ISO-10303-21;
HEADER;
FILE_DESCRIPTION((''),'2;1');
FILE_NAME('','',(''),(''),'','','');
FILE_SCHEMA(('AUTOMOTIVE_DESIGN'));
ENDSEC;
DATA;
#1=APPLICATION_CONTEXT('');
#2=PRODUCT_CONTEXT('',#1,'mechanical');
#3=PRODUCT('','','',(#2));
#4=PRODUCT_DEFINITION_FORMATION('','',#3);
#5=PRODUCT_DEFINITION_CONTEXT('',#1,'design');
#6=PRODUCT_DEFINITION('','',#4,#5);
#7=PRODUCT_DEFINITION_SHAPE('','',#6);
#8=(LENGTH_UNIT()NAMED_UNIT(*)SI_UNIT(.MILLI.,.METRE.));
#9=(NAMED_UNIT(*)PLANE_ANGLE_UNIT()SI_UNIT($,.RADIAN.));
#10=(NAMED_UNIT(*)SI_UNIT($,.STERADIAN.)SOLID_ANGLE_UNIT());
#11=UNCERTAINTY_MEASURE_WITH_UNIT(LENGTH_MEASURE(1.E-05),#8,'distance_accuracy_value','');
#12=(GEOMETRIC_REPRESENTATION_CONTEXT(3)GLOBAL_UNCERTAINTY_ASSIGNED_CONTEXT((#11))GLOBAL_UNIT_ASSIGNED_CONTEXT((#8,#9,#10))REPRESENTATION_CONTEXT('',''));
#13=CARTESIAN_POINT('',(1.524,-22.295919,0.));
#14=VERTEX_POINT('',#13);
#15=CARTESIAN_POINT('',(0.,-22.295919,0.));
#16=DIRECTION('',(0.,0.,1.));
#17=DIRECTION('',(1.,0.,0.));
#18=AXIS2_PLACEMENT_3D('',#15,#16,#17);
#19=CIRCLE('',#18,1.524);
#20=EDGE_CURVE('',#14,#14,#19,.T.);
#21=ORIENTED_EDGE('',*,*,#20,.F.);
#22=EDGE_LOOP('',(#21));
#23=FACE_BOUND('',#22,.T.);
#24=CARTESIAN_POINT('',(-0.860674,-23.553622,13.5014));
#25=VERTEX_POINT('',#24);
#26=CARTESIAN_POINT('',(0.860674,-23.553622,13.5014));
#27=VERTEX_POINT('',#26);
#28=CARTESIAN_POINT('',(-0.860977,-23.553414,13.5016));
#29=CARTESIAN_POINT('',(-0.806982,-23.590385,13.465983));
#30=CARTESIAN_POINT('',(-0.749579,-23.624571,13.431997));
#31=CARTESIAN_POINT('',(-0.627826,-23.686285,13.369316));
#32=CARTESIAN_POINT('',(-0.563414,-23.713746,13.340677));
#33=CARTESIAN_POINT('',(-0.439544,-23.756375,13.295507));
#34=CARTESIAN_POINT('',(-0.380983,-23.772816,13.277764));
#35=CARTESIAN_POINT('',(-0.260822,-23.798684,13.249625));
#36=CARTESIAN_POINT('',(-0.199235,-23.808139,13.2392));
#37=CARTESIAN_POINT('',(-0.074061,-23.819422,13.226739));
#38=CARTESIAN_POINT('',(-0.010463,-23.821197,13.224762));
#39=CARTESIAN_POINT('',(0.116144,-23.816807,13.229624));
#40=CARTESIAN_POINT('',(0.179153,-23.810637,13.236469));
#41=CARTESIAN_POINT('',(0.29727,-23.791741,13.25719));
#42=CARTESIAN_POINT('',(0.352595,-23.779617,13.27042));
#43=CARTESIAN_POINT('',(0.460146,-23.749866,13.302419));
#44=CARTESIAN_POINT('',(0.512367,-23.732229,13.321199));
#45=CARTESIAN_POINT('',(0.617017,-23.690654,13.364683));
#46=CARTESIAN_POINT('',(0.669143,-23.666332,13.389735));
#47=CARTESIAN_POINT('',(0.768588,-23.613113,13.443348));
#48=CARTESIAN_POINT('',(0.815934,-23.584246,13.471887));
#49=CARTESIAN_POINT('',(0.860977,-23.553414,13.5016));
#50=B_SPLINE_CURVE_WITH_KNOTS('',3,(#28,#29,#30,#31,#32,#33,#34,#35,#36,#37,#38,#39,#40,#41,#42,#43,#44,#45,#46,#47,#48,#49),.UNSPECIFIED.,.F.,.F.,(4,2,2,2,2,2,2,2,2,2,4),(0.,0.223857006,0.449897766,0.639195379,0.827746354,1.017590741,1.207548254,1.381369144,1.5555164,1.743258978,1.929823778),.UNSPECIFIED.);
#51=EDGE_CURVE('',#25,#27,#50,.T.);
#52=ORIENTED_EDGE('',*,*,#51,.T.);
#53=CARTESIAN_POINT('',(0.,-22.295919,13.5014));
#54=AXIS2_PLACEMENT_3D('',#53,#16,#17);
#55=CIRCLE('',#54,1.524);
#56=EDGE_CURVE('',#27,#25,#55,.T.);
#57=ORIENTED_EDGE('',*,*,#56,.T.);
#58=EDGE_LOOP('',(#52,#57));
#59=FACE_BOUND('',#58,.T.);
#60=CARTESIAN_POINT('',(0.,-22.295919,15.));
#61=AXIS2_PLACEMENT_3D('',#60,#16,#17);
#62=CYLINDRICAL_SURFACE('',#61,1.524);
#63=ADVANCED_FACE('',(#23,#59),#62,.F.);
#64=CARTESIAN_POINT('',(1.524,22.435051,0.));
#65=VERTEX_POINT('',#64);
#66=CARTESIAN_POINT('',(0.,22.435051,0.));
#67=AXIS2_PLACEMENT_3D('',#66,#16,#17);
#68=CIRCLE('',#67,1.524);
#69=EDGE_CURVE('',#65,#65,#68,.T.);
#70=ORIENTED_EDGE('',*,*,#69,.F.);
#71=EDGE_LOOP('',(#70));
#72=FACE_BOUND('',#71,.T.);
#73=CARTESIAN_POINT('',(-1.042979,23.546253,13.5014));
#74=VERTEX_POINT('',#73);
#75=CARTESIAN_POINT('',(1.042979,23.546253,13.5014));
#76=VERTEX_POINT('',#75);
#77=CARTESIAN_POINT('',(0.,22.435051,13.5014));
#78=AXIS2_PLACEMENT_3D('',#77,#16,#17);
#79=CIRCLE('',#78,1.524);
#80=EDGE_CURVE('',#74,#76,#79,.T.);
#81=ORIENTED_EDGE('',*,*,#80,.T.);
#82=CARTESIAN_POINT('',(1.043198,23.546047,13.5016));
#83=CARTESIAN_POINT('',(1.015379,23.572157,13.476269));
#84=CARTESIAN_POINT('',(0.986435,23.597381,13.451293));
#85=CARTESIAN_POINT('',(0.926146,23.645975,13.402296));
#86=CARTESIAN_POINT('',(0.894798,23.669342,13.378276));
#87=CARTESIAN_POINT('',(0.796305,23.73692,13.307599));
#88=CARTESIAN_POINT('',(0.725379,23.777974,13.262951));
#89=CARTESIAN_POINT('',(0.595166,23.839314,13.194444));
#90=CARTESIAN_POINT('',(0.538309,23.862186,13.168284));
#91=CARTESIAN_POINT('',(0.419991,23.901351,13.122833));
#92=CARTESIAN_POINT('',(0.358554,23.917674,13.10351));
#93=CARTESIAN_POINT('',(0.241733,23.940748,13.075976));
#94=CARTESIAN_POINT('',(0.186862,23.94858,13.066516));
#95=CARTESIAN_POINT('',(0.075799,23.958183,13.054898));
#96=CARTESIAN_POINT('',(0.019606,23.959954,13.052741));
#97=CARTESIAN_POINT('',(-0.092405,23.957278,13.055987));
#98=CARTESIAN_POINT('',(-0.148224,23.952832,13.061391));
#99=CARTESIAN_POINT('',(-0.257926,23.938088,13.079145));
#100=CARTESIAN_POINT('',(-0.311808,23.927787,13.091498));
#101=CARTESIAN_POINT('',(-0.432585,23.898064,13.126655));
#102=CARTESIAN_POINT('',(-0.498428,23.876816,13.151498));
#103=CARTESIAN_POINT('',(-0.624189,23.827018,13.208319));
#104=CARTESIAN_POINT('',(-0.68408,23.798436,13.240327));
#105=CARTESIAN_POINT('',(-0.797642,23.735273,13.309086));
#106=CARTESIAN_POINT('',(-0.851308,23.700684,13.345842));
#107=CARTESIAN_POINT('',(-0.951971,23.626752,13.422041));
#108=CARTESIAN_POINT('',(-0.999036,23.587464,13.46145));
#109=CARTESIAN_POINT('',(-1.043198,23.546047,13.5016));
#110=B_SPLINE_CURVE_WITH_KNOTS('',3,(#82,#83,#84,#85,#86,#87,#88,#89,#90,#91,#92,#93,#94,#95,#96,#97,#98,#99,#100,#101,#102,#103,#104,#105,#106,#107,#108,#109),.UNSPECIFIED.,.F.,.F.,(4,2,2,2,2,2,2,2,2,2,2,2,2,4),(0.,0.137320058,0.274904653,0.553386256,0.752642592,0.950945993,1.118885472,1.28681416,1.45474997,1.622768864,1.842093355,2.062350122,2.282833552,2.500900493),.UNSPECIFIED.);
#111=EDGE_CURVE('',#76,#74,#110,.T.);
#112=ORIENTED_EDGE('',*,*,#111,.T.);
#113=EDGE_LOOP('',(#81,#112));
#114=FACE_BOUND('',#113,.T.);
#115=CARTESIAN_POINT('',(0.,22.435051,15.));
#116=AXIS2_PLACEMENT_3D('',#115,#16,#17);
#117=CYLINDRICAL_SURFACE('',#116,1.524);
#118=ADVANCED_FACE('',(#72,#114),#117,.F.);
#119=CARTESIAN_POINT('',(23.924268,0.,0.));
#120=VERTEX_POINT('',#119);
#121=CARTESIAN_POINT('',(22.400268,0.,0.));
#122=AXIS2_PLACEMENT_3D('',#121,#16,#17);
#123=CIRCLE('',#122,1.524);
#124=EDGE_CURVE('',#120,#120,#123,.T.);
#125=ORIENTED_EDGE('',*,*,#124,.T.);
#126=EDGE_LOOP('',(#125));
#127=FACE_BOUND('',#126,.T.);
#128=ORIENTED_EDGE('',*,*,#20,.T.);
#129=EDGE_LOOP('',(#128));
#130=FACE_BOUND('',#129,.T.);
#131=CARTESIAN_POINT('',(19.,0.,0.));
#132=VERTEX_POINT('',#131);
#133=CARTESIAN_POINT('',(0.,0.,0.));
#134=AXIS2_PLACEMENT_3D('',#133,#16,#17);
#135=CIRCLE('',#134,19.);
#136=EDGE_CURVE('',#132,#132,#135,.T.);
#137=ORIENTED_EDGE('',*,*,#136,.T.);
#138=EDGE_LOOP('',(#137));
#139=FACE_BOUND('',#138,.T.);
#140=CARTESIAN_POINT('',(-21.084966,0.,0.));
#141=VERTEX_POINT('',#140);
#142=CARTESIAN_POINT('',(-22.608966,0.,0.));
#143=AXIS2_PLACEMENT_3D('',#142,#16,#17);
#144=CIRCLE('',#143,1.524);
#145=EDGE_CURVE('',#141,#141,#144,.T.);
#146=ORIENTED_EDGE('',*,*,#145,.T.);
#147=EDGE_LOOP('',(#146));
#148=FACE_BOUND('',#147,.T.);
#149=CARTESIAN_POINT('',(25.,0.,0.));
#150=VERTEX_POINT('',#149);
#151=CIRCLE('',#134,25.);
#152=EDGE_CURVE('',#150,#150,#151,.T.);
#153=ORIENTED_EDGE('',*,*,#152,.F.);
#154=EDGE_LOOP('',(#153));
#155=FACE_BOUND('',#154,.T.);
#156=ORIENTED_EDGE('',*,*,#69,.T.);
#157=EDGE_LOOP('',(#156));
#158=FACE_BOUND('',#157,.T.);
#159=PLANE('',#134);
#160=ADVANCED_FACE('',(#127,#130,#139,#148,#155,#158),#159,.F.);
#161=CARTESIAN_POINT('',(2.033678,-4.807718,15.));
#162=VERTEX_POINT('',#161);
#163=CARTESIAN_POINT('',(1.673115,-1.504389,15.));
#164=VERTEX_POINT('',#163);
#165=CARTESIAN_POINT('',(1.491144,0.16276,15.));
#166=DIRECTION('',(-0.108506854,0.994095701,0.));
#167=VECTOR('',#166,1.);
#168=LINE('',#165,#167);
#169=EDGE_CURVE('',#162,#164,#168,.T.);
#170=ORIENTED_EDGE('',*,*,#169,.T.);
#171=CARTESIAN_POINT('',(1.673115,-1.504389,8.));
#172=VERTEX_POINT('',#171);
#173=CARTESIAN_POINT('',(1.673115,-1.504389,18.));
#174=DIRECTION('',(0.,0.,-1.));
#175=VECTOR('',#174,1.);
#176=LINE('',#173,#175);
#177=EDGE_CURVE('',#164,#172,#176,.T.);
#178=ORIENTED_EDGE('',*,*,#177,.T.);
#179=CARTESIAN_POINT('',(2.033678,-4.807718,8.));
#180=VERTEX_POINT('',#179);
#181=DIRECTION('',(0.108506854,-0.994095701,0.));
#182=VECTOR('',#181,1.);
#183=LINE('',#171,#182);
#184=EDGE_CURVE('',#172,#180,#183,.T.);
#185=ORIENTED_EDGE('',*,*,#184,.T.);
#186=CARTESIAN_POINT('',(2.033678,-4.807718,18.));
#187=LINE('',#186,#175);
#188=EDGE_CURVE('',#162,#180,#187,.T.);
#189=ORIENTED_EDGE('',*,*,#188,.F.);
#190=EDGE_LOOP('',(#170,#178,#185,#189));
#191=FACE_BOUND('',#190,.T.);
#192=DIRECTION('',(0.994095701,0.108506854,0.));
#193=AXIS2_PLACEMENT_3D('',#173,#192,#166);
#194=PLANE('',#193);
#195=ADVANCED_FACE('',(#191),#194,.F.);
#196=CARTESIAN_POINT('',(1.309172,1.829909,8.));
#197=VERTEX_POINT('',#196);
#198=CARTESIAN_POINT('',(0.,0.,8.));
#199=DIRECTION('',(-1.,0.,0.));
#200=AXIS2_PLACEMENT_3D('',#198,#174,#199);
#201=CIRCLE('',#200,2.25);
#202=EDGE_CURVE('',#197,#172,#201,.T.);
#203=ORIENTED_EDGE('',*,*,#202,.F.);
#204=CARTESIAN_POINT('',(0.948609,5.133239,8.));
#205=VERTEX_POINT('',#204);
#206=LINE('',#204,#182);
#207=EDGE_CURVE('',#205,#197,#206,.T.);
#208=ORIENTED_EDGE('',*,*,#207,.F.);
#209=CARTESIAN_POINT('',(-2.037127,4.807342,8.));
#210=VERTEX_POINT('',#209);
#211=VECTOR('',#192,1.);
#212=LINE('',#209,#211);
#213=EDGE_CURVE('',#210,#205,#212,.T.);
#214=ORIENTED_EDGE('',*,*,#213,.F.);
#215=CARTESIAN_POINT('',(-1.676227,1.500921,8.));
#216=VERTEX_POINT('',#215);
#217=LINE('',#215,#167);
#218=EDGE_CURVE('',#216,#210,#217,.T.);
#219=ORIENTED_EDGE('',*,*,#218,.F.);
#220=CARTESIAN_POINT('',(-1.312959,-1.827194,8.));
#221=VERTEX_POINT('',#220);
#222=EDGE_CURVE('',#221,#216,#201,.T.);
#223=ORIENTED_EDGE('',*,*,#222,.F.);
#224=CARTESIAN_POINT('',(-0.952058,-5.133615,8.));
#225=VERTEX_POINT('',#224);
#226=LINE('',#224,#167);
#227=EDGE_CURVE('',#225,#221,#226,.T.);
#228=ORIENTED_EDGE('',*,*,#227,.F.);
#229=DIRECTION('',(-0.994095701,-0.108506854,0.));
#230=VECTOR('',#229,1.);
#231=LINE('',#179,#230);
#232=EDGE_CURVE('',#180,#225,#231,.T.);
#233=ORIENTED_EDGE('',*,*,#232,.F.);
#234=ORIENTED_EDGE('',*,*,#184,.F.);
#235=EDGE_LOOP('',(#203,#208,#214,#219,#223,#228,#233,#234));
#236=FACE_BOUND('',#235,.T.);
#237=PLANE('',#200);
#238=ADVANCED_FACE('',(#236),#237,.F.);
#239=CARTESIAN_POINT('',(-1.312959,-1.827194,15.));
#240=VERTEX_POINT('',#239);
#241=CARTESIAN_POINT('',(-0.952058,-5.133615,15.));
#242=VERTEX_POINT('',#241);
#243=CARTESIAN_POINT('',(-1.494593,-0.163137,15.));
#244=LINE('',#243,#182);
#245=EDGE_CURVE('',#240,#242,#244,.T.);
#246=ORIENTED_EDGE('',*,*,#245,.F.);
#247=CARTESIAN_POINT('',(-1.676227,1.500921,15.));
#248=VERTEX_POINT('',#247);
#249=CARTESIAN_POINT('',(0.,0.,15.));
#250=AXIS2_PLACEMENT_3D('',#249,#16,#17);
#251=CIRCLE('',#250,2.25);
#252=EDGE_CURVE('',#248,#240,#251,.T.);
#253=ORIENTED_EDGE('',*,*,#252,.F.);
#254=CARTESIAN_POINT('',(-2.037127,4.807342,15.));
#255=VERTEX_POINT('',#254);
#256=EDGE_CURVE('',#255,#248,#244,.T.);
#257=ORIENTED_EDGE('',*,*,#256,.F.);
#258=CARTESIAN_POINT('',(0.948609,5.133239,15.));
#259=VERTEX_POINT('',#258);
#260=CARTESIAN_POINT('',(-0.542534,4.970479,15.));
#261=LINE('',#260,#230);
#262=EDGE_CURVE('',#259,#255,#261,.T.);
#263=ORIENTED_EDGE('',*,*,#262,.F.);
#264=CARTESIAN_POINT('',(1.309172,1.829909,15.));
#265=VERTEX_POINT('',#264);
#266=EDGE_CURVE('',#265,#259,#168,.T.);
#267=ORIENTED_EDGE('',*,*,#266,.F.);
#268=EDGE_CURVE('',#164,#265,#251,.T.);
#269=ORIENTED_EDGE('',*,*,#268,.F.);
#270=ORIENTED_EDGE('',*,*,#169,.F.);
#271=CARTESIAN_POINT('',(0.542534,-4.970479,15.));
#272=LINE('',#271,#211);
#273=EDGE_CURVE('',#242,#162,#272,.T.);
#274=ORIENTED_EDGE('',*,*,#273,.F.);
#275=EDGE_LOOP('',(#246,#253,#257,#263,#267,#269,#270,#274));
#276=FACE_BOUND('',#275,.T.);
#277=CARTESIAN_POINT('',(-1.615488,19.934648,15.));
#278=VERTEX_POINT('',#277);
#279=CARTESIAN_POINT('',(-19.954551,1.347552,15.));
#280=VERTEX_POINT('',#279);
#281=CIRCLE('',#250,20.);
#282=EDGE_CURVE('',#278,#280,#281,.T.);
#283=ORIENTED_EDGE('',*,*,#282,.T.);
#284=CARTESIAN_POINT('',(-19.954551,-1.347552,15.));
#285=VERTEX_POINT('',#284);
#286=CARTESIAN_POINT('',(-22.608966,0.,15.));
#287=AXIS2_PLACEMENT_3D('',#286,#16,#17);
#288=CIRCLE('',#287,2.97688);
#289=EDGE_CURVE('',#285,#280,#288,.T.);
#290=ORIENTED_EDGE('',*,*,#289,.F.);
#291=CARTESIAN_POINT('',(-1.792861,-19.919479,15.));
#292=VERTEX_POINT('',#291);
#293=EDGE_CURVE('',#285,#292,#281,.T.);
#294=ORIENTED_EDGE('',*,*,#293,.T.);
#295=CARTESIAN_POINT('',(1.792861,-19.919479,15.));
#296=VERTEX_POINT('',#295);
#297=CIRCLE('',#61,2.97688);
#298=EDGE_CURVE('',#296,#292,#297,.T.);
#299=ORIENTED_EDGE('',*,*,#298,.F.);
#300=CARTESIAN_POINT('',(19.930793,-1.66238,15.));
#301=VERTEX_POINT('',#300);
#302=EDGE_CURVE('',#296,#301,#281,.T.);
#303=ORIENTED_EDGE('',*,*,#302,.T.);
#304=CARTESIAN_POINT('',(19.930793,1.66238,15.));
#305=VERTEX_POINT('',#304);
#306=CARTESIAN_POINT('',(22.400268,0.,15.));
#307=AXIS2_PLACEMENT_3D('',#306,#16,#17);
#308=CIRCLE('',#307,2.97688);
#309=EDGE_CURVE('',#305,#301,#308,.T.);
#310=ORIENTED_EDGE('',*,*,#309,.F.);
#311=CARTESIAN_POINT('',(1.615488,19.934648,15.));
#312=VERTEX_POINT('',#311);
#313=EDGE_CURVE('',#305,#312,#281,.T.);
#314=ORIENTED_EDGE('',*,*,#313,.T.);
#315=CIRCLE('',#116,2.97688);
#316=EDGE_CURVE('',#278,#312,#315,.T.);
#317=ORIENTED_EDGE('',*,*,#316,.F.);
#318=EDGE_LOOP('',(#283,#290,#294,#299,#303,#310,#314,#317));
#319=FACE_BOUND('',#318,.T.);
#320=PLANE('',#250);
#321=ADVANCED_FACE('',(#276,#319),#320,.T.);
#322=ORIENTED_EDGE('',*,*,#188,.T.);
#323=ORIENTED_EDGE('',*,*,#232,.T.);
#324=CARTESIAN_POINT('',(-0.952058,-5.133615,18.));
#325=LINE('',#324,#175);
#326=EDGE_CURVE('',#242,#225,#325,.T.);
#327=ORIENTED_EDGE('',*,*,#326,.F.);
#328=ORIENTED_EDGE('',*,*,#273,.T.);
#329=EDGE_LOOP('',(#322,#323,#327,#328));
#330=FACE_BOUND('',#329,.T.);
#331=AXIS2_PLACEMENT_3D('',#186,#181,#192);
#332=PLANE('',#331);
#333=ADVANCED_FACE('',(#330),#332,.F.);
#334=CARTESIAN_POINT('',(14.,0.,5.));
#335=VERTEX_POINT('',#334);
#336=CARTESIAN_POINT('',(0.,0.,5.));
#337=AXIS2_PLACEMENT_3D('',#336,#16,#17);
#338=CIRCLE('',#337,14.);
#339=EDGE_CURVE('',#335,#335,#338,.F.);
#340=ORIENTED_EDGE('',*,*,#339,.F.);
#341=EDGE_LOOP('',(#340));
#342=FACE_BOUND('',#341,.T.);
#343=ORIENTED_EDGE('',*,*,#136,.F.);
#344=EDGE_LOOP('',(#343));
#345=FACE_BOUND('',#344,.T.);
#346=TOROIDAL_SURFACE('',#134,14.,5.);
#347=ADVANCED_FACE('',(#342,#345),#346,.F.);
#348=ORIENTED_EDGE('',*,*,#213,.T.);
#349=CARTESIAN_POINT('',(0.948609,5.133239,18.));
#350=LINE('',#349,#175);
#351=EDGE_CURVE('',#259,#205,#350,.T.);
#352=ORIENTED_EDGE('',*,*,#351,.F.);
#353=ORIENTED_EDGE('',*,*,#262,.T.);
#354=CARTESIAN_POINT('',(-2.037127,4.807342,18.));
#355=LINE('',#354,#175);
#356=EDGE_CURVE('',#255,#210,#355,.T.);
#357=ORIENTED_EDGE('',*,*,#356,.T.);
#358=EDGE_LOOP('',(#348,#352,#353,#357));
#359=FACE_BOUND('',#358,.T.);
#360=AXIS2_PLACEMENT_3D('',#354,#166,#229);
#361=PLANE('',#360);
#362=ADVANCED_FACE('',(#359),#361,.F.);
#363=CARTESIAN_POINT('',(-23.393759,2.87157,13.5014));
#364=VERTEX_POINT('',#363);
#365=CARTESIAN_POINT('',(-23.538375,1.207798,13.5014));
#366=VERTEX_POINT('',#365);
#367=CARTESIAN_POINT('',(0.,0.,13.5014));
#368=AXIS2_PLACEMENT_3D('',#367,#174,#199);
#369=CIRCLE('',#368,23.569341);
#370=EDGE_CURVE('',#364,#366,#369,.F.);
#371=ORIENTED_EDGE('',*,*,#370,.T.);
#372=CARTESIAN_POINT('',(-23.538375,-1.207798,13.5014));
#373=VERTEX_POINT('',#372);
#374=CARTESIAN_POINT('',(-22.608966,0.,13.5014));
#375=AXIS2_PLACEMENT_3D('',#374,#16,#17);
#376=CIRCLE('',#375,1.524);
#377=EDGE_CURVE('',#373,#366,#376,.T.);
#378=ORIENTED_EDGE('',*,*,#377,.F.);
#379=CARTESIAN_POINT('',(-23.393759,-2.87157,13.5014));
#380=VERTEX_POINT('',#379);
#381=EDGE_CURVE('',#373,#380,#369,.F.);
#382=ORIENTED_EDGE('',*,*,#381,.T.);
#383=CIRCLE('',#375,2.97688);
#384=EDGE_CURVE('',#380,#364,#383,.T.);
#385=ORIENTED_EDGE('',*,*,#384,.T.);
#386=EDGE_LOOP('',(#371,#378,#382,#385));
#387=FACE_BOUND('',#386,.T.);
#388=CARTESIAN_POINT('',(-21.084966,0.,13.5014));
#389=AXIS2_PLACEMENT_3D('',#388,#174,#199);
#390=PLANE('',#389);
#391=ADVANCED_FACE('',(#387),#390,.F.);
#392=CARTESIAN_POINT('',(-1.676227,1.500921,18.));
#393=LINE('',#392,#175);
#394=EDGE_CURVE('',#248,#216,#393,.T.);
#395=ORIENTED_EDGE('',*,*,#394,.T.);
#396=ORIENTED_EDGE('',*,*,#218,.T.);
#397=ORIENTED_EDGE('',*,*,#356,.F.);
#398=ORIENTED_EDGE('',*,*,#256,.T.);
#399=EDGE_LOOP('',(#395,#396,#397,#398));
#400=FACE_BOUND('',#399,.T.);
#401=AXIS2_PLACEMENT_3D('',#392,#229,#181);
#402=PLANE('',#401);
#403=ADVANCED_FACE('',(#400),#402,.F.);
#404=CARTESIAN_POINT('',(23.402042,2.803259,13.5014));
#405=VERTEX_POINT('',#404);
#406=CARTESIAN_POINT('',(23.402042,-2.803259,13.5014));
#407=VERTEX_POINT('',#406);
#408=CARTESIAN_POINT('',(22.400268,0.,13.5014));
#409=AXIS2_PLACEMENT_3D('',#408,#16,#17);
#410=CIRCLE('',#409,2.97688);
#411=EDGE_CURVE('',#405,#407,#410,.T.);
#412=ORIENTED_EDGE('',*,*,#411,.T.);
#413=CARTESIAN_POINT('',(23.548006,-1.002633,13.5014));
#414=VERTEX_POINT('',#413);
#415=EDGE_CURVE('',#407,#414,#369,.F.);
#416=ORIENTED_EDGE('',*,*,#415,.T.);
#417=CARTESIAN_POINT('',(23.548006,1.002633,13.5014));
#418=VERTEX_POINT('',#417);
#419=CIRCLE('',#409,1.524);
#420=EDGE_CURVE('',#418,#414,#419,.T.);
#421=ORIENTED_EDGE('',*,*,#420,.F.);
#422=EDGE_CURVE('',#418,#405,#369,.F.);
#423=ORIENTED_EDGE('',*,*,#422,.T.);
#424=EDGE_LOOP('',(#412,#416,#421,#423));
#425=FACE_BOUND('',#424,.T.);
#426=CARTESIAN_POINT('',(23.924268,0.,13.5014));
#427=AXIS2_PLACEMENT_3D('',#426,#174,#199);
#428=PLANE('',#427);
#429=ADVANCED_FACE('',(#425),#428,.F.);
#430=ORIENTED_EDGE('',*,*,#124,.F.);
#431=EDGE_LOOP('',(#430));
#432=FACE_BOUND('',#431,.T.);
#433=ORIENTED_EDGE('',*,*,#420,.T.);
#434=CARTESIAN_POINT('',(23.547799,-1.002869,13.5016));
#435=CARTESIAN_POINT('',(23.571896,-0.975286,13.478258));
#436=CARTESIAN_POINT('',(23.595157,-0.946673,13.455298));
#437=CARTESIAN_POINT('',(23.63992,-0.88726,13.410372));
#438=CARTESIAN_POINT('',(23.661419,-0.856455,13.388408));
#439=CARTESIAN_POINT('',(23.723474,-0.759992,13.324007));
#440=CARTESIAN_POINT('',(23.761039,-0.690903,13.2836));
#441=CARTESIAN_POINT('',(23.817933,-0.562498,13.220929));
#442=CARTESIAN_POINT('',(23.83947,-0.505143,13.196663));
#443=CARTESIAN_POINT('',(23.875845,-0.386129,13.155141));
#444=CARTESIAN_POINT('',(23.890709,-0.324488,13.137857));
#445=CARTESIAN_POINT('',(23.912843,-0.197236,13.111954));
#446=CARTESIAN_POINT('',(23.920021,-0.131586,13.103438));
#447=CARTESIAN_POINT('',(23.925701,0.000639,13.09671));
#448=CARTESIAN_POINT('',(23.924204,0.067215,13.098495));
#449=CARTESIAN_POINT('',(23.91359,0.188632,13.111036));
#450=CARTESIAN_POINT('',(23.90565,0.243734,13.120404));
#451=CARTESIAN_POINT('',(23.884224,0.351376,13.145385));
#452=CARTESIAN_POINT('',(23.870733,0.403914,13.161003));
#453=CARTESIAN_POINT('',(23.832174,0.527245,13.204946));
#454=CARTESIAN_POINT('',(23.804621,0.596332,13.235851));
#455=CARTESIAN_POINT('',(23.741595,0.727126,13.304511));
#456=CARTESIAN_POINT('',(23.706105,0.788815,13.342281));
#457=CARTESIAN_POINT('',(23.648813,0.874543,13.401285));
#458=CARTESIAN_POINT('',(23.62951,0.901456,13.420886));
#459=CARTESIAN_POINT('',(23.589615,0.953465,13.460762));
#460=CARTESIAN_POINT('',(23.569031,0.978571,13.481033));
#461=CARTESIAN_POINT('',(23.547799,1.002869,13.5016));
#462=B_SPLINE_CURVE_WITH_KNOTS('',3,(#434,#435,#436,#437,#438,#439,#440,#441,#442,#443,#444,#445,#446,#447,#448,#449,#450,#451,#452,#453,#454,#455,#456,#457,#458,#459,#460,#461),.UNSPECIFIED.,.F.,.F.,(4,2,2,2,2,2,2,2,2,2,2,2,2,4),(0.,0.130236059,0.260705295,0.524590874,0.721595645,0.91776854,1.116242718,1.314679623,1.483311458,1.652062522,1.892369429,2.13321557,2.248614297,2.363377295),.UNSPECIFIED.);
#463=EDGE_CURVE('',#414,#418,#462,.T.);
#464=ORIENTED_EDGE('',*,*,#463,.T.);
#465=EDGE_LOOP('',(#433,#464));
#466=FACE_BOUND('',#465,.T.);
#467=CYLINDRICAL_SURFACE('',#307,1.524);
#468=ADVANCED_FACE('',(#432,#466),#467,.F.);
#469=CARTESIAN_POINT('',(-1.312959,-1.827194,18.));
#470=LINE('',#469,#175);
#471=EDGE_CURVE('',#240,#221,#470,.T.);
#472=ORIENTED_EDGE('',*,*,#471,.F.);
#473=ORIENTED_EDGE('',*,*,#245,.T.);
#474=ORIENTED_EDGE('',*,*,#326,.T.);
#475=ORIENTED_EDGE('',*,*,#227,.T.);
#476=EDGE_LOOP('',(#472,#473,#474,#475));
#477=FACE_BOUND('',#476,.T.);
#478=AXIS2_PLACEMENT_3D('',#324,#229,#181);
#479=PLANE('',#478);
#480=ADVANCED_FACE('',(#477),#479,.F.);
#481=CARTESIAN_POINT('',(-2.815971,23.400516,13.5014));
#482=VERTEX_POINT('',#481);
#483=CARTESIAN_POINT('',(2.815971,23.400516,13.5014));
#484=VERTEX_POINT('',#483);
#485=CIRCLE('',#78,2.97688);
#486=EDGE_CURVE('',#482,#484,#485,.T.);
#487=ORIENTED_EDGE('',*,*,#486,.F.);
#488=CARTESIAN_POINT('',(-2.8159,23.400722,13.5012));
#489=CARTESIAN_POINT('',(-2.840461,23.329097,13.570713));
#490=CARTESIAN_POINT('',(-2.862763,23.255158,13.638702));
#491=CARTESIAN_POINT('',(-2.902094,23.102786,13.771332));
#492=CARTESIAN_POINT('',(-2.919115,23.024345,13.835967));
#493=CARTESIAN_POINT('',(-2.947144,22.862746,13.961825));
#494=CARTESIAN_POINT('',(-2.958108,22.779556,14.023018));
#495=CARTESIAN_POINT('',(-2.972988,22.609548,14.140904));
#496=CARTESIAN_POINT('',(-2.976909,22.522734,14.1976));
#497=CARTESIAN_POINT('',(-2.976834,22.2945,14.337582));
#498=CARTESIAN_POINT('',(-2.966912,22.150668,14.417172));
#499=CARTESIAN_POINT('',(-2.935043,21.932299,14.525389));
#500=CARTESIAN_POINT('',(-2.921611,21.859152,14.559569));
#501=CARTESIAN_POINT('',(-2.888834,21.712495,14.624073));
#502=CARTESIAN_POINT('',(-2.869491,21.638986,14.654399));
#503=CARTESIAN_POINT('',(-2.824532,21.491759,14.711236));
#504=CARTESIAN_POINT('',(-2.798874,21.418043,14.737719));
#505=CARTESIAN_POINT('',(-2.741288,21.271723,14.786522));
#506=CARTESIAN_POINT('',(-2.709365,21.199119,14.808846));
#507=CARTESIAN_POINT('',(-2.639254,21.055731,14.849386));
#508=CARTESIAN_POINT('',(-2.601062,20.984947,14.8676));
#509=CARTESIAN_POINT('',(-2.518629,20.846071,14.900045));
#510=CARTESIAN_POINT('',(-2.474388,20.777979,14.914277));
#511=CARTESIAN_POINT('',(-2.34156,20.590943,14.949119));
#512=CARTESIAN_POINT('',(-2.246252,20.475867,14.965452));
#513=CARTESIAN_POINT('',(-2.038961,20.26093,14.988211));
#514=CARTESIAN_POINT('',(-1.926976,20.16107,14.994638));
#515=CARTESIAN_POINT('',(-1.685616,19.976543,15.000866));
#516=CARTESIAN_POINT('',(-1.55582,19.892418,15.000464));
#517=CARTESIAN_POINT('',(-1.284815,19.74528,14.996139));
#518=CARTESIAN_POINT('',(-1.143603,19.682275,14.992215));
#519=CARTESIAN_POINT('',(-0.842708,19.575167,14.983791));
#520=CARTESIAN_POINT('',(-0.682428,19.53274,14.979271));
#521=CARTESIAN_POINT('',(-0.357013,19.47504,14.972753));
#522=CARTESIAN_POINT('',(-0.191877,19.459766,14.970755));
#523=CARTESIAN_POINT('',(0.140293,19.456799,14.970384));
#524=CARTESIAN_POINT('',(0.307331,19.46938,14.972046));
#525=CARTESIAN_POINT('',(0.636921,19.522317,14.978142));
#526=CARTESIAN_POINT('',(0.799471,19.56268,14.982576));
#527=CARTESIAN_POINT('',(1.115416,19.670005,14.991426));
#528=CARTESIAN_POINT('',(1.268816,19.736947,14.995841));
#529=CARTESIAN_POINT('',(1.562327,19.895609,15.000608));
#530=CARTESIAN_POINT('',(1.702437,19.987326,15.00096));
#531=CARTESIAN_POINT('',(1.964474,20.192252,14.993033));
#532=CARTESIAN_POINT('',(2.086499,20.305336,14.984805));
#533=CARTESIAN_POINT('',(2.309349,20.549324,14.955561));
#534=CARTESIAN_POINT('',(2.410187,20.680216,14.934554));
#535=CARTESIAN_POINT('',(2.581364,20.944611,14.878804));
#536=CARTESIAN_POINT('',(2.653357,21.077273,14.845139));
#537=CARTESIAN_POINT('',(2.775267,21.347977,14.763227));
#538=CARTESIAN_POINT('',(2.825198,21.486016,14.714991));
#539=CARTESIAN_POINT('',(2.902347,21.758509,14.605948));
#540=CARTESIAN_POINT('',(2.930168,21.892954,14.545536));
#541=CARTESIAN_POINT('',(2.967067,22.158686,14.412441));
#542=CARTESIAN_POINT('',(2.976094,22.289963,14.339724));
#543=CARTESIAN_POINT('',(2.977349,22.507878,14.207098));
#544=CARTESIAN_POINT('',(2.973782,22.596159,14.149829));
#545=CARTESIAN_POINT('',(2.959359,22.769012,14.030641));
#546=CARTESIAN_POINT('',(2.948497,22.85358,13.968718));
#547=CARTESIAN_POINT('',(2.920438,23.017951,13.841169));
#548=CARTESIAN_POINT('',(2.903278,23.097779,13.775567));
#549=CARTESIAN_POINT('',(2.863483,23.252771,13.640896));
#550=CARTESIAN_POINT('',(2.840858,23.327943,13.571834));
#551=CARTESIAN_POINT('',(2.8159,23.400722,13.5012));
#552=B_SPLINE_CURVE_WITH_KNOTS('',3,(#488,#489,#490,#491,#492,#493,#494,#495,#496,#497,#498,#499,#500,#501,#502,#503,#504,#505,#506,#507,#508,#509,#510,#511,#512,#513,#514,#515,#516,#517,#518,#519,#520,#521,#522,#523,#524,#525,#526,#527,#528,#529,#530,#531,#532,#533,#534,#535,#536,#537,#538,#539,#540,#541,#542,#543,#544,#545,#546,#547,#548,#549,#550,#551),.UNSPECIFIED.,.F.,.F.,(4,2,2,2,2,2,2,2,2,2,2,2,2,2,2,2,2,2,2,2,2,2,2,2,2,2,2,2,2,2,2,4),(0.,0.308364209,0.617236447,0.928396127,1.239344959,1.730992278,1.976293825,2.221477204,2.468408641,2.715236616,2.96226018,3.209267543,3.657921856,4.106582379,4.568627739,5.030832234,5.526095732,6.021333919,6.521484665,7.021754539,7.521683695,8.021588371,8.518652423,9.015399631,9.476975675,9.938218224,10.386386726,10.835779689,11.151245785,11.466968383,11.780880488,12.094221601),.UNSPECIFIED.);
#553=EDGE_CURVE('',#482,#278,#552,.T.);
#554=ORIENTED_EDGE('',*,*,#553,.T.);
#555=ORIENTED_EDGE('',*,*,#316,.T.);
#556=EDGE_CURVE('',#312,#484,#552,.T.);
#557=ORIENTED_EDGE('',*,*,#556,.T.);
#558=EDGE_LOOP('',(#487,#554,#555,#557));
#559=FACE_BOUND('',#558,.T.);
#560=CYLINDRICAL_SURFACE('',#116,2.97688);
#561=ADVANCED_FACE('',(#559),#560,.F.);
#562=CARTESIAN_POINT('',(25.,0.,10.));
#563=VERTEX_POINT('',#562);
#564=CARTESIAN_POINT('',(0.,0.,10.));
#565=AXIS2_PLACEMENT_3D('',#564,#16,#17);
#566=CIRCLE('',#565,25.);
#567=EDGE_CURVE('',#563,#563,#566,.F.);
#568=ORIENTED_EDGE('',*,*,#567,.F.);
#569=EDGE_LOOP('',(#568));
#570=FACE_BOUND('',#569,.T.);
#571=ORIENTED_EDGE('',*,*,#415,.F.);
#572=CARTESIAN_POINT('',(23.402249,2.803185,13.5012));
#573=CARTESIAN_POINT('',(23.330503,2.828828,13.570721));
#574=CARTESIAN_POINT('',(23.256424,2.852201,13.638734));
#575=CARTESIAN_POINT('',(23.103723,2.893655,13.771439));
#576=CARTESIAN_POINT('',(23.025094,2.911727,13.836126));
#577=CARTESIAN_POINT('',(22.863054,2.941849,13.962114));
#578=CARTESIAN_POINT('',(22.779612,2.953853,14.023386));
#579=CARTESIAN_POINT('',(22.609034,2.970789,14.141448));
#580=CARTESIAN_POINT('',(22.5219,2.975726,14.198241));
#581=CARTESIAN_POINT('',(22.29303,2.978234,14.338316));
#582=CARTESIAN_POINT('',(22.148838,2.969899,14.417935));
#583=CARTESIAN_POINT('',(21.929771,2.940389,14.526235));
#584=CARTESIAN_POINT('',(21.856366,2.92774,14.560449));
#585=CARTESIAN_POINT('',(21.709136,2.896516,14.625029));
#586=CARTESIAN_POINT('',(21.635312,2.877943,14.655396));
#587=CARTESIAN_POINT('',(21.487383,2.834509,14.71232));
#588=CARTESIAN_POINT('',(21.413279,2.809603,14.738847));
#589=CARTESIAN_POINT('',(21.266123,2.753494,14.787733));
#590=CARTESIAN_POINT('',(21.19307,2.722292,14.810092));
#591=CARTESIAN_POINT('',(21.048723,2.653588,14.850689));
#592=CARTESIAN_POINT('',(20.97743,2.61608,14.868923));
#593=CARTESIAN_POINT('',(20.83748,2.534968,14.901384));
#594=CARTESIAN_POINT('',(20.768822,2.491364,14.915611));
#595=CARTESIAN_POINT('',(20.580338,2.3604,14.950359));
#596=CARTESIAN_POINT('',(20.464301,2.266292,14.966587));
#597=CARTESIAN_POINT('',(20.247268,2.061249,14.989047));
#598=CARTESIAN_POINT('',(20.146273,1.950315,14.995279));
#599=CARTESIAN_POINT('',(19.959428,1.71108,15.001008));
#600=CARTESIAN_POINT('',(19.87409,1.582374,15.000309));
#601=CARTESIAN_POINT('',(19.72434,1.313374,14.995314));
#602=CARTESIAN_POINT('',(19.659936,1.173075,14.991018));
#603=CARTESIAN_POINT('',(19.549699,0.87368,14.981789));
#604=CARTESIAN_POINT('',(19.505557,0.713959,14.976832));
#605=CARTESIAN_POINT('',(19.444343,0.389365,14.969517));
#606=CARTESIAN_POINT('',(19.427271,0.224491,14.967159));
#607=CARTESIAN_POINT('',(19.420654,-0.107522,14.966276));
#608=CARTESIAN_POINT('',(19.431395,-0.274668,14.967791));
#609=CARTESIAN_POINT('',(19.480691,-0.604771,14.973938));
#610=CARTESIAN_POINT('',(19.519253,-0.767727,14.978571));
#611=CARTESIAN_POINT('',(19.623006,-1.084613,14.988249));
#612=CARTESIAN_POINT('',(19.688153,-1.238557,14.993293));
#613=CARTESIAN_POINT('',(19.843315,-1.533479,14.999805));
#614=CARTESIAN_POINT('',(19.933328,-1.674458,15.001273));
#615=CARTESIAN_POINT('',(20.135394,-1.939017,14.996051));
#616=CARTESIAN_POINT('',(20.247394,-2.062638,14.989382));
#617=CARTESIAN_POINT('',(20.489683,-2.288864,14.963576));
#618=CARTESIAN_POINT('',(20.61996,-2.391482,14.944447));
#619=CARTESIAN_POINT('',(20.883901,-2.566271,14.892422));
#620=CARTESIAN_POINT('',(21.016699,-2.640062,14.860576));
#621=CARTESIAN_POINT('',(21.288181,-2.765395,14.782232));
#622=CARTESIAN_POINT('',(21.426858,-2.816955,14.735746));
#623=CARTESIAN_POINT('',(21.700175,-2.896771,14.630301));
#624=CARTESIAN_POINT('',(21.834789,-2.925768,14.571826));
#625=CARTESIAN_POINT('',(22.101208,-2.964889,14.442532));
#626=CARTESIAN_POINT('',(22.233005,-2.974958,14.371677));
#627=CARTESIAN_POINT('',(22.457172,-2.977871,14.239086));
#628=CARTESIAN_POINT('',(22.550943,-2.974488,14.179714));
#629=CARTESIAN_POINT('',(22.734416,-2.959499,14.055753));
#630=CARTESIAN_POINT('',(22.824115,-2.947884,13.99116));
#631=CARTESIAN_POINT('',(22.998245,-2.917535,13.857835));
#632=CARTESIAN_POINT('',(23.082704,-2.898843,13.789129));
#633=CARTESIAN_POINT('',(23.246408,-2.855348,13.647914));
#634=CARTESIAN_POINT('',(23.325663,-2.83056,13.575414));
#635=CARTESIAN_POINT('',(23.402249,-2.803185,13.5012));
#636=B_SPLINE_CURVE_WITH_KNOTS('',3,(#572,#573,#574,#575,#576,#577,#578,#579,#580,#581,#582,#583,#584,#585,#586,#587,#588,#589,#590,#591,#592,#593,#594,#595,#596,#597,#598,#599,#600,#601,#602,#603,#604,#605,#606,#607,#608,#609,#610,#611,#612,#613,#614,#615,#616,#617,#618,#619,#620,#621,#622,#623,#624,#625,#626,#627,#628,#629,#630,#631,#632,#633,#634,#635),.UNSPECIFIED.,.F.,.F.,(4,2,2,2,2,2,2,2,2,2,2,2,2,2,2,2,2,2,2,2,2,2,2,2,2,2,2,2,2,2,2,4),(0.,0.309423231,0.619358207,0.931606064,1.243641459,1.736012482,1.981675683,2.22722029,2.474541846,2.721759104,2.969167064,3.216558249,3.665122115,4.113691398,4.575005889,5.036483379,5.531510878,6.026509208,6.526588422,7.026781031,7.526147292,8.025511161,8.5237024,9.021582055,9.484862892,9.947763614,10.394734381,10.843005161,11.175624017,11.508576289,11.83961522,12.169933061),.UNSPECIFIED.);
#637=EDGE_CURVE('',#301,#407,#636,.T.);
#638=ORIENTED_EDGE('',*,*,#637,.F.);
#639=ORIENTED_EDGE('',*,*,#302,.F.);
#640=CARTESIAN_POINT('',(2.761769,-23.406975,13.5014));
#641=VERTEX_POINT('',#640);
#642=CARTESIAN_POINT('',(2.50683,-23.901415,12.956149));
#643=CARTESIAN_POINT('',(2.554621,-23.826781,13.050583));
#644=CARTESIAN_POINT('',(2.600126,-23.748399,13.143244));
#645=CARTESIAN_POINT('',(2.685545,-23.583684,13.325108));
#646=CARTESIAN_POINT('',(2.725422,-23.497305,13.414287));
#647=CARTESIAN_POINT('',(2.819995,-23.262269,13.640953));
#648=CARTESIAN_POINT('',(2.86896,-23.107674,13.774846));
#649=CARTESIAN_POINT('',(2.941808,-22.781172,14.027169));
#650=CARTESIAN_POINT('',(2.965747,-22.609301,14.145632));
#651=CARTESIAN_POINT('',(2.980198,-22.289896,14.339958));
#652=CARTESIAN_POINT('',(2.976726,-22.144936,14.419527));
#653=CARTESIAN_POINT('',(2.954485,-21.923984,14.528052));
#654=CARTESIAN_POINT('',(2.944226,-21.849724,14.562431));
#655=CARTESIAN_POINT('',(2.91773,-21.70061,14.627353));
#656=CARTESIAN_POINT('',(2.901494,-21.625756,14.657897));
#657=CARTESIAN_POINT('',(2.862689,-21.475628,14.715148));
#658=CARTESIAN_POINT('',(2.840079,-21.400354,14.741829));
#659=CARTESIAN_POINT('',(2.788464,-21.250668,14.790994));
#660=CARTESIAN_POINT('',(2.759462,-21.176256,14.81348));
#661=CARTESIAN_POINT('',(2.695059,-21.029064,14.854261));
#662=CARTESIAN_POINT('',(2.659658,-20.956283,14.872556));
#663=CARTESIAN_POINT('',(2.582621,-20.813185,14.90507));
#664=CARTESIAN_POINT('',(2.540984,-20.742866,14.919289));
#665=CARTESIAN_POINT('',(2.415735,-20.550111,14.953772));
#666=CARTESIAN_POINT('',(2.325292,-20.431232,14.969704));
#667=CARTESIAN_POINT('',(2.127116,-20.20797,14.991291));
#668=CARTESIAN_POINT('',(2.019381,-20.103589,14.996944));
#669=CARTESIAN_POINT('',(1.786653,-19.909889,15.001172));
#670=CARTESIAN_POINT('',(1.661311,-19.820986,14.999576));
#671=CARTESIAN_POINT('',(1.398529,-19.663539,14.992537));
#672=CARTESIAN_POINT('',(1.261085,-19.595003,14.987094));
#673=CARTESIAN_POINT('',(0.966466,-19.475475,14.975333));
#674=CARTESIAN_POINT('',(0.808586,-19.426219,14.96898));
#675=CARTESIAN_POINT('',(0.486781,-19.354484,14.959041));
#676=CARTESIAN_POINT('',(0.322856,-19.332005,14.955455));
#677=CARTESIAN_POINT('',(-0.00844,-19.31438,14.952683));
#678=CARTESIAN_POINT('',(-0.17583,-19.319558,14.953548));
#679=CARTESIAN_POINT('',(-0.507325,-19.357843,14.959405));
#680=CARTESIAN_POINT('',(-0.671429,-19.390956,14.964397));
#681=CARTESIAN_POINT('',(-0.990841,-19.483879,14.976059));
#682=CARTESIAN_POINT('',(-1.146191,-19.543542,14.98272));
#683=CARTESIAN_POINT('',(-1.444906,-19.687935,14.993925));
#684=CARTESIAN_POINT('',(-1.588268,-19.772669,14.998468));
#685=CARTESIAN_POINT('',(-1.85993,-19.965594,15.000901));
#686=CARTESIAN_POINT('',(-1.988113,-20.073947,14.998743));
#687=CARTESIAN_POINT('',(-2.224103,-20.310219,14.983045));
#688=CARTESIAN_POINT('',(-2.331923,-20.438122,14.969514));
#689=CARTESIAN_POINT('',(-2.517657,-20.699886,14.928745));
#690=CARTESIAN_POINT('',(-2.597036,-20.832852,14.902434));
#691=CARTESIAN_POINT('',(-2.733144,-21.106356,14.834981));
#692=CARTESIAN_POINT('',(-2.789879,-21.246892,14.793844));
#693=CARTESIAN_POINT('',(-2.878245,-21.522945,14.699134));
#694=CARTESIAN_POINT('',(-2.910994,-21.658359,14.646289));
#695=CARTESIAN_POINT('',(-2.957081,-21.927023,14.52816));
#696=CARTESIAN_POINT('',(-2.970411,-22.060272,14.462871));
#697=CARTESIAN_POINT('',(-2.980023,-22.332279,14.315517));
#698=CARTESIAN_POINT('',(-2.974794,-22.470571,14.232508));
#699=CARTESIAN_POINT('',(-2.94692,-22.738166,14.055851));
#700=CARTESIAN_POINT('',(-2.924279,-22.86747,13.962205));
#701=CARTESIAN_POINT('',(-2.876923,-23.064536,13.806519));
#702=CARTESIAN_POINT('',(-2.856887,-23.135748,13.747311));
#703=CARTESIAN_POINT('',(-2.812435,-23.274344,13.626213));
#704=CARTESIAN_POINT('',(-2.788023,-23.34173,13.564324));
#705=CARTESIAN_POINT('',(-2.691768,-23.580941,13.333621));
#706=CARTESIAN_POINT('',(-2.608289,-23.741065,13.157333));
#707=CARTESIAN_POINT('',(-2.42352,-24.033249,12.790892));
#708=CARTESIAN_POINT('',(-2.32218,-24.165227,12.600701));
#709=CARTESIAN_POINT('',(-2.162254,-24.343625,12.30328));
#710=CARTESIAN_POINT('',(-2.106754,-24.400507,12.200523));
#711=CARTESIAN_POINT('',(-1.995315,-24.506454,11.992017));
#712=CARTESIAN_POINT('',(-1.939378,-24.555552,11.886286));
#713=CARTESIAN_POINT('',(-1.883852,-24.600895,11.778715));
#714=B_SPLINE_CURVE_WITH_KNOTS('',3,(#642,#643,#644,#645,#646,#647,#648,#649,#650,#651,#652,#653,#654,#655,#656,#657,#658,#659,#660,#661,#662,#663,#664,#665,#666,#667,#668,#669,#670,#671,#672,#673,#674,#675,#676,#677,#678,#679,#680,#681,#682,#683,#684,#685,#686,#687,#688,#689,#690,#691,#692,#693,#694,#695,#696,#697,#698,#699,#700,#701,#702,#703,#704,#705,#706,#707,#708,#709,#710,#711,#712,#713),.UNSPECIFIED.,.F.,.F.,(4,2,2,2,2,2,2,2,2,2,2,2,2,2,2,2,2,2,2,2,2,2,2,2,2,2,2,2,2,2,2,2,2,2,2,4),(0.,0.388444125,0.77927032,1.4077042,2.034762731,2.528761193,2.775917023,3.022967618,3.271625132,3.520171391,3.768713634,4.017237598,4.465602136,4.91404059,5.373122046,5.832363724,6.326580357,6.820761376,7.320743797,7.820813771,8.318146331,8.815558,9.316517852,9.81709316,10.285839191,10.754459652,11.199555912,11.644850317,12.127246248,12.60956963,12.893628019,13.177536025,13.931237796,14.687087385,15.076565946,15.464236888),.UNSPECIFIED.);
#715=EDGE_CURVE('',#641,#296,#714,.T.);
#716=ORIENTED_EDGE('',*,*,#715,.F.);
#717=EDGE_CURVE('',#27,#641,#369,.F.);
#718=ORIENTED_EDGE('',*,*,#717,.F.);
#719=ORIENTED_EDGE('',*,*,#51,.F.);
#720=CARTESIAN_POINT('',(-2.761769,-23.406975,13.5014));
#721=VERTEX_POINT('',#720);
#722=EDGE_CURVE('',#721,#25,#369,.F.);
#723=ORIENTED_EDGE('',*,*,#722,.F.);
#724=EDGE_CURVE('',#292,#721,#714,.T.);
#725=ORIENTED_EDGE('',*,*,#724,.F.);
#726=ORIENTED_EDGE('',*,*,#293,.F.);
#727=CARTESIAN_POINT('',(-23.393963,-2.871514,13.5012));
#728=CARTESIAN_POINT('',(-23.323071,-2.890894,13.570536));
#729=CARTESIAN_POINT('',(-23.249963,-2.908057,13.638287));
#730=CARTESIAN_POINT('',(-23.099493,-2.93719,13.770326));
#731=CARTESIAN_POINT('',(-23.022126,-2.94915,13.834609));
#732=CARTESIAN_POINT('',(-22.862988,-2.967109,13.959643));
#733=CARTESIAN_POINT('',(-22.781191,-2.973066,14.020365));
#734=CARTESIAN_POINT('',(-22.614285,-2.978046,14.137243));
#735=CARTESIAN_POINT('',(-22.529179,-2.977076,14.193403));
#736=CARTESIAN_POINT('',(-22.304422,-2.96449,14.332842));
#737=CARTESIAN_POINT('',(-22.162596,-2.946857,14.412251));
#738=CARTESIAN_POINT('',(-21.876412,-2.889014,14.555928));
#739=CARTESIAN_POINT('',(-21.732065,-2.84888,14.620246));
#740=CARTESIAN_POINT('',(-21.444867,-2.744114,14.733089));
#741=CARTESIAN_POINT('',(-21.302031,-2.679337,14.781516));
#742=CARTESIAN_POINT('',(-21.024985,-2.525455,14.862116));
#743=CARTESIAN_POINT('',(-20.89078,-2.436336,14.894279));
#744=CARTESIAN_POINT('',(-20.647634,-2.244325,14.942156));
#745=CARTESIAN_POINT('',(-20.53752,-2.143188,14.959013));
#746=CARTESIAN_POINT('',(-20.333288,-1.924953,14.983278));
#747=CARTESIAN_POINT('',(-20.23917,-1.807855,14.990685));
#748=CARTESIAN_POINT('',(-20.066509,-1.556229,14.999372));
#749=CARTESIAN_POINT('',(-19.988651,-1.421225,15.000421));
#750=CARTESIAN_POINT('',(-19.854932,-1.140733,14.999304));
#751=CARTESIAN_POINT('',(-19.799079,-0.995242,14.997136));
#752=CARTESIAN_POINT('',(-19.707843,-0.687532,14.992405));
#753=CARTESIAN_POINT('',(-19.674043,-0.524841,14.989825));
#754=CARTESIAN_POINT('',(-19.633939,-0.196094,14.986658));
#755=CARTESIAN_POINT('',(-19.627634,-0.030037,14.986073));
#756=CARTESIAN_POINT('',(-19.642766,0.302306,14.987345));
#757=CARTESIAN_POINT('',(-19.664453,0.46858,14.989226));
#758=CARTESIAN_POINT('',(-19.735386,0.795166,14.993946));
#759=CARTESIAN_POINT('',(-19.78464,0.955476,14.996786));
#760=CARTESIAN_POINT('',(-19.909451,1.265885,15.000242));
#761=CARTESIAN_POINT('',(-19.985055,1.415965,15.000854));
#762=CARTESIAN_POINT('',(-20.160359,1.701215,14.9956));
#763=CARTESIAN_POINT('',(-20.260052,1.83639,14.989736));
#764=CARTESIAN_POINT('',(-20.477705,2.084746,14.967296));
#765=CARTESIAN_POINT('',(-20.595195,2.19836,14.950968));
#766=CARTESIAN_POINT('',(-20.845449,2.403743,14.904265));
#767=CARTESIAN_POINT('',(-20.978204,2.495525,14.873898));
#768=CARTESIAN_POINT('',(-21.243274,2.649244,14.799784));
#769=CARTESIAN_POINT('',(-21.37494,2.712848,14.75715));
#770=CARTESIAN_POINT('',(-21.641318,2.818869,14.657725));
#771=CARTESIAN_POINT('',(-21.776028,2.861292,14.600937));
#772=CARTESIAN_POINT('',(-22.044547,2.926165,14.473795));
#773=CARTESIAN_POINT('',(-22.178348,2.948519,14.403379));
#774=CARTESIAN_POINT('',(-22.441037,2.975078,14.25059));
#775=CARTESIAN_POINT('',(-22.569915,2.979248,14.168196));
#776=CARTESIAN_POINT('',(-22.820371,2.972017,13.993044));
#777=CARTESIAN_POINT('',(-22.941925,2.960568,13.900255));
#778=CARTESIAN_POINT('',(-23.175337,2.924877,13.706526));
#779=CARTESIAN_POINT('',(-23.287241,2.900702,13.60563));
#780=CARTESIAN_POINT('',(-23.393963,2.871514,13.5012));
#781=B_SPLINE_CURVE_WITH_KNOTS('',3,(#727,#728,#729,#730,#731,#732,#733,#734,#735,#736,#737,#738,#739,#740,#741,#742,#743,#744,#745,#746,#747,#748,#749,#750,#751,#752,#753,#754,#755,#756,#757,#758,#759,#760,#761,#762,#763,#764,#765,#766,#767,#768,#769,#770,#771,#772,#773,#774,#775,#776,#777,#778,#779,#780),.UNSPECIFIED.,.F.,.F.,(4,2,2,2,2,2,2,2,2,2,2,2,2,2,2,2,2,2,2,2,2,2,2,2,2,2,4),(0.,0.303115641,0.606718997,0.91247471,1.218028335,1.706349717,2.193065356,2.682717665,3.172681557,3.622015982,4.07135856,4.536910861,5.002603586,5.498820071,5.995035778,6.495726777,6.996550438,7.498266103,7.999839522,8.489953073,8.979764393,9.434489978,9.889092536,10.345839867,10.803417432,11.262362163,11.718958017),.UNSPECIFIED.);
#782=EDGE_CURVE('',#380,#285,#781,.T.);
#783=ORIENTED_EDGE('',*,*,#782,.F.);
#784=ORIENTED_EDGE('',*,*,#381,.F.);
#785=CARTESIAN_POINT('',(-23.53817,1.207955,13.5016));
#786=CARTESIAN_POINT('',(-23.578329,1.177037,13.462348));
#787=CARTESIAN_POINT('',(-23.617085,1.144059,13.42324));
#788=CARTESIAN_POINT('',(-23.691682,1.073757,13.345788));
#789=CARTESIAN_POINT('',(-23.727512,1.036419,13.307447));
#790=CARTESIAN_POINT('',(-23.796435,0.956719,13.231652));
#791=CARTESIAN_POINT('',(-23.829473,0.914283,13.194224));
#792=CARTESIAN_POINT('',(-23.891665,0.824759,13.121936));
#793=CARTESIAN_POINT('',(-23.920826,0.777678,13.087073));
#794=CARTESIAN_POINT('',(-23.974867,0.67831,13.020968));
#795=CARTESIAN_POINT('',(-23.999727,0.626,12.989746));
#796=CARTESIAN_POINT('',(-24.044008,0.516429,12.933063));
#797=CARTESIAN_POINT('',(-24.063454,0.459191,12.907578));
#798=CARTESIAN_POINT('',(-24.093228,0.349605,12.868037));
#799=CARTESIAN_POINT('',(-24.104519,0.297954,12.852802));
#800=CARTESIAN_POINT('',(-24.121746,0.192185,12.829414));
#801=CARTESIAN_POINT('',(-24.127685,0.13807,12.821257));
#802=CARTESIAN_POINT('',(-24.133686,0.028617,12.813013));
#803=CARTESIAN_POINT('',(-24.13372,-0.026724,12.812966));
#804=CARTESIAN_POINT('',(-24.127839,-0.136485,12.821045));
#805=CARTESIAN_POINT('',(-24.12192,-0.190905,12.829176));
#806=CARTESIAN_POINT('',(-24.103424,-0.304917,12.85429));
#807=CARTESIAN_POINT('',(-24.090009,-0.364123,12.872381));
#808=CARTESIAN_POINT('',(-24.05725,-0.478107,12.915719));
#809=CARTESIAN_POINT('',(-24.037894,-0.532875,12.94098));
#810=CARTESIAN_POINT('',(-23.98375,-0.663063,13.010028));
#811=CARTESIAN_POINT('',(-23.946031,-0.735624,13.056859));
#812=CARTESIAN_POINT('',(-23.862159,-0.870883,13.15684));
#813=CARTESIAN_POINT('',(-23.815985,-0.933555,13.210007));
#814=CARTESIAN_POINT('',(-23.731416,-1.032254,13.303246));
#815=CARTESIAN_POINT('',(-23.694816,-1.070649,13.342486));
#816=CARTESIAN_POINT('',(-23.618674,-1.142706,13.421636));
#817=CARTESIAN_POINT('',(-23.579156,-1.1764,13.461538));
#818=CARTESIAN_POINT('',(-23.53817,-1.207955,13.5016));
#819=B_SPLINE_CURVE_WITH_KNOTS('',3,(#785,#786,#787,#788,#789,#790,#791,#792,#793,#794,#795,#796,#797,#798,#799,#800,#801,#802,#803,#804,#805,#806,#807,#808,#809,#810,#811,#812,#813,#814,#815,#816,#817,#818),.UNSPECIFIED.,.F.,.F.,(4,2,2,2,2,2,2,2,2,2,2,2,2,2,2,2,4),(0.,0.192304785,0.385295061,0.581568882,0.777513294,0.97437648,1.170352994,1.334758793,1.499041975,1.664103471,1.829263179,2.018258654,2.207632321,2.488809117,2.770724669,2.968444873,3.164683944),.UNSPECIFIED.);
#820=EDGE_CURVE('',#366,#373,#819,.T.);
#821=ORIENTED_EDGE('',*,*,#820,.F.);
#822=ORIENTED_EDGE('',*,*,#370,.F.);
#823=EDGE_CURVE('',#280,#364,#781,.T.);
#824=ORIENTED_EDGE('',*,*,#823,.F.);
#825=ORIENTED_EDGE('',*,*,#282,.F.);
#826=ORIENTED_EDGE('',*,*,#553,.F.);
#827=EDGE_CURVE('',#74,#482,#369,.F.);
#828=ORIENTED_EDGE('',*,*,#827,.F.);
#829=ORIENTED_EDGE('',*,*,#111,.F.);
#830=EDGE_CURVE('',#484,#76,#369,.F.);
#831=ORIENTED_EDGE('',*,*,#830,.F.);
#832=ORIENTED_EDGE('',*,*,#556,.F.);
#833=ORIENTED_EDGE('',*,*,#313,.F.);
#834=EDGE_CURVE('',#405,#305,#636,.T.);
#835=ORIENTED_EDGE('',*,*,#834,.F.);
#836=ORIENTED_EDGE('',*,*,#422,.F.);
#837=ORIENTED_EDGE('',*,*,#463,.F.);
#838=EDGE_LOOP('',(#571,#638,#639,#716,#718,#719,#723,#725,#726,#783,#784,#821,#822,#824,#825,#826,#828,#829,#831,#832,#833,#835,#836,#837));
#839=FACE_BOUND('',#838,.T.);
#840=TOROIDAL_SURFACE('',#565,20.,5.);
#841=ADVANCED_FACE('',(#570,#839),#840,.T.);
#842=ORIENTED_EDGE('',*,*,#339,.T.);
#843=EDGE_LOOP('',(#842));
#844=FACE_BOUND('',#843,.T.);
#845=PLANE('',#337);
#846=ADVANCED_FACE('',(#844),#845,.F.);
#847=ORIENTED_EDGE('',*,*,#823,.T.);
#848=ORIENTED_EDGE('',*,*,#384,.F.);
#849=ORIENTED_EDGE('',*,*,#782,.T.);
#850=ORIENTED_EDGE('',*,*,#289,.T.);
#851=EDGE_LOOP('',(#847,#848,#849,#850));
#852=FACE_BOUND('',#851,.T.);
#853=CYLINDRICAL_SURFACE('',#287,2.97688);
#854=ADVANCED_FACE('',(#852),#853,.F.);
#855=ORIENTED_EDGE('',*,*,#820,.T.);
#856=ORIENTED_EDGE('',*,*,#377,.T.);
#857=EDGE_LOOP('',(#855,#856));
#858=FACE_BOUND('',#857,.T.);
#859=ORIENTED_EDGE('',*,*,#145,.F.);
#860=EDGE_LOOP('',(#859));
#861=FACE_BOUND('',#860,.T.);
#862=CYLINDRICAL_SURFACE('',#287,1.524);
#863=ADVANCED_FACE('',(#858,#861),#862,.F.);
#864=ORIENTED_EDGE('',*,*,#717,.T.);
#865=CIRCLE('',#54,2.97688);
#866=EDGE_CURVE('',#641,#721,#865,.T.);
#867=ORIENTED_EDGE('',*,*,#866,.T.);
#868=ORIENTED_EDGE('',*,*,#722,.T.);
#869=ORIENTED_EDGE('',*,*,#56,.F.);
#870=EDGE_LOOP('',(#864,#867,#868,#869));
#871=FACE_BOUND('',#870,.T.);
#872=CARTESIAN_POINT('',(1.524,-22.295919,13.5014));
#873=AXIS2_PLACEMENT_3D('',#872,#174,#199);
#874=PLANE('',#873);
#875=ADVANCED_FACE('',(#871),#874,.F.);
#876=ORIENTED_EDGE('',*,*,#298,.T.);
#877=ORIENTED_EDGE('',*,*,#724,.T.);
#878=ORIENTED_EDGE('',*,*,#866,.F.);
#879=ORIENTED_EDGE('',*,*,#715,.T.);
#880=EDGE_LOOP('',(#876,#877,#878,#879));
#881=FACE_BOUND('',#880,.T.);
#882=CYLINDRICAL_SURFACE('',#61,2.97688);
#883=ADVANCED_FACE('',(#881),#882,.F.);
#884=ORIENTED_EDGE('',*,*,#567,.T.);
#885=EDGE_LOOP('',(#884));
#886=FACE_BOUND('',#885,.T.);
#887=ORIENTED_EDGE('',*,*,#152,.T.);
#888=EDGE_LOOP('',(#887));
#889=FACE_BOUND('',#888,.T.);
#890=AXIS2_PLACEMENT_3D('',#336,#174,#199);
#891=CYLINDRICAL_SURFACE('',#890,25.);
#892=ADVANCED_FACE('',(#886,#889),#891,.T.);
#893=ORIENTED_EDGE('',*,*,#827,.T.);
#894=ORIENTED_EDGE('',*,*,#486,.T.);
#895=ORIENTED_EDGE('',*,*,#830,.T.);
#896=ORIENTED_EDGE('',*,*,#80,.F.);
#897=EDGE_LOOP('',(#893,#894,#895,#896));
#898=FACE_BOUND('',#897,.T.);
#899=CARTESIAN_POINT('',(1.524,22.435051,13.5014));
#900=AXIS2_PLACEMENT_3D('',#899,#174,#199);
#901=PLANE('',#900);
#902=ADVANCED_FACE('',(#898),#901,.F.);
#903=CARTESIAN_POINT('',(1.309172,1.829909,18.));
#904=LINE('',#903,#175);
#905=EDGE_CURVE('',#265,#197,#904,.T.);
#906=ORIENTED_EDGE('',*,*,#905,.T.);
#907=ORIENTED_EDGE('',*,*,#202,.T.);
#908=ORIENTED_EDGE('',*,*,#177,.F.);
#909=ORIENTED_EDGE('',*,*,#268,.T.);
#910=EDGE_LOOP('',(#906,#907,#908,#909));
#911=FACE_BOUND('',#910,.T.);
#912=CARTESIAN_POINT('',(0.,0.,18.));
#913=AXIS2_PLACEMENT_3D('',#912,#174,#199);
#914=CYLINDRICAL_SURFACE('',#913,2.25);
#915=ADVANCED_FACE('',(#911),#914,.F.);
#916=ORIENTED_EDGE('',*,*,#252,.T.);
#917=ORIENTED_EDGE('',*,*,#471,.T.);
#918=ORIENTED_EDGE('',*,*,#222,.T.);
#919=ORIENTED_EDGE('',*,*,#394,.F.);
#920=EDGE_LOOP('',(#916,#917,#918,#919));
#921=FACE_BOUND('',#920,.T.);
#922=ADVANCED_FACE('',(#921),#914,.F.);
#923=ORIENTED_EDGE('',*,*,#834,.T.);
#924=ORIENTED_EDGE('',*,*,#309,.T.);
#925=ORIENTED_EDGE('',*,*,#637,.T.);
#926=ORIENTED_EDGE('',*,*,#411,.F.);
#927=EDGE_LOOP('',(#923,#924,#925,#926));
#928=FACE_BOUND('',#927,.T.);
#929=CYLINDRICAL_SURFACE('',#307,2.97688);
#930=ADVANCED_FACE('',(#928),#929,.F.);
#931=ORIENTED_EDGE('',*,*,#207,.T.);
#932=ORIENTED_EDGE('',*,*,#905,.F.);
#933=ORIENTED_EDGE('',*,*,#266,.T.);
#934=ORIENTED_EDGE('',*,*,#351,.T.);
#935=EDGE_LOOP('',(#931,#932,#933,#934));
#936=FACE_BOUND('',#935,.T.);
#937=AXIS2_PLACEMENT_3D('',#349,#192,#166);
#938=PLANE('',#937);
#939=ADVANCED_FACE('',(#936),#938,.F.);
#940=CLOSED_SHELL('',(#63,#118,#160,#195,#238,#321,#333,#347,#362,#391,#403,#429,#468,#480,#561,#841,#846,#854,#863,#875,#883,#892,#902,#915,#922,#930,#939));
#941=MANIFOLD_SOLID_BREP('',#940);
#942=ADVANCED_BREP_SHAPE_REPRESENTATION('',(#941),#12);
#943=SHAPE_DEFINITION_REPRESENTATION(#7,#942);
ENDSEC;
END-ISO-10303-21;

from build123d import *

# Parameters (mm, degrees)
SKETCH1_R                                           = 25
SKETCH1_R_2                                         = 19
BOSS_EXTRUDE1_DEPTH                                 = 5
SKETCH2_R                                           = 25
BOSS_EXTRUDE2_DEPTH                                 = 10
FILLET1_R                                           = 5
CBORE_FOR_3_BINDING_HEAD_MACHINE_SCREW1_D           = 3.048
CBORE_FOR_3_BINDING_HEAD_MACHINE_SCREW1_CBORE_D     = 5.95376
CBORE_FOR_3_BINDING_HEAD_MACHINE_SCREW1_CBORE_DEPTH = 1.4986
CUT_EXTRUDE1_START                                  = -3
CUT_EXTRUDE1_DEPTH                                  = 10


with BuildPart() as part:
    # Sketch1 → Boss-Extrude1 (new body)
    with BuildSketch(Plane.XY):
        Circle(SKETCH1_R)
        Circle(SKETCH1_R_2, mode=Mode.SUBTRACT)
    extrude(amount=BOSS_EXTRUDE1_DEPTH)

    # Sketch2 → Boss-Extrude2 (add)
    with BuildSketch(Plane.XY.offset(5)):
        Circle(SKETCH2_R)
    extrude(amount=BOSS_EXTRUDE2_DEPTH)

    # Fillet1
    fillet1_edges = [part.edges().sort_by_distance(p)[0] for p in [
        (-25, 0, 15),
        (-19, 0, 5),
    ]]
    fillet(fillet1_edges, radius=FILLET1_R - 0.0001)  # a hair under: the kernel refuses the full size

    # CBORE for #3 Binding Head Machine Screw1 (through all)
    with Locations(Plane.XY.offset(15)):
        with Locations((0, 22.435050854), (0, -22.295918756), (22.400267829, 0), (-22.608965977, 0)):
            CounterBoreHole(CBORE_FOR_3_BINDING_HEAD_MACHINE_SCREW1_D / 2, CBORE_FOR_3_BINDING_HEAD_MACHINE_SCREW1_CBORE_D / 2, CBORE_FOR_3_BINDING_HEAD_MACHINE_SCREW1_CBORE_DEPTH)

    # Sketch15 → Cut-Extrude1 (cut)
    with BuildSketch(Plane(origin=(0, 0, 5), x_dir=(-1, 0, 0), z_dir=(0, 0, -1)).offset(CUT_EXTRUDE1_START)):
        with BuildLine():
            Line((1.676226843, 1.500920907), (2.037127027, 4.807341739))
            Line((2.037127027, 4.807341739), (-0.948609283, 5.133238785))
            Line((-0.948609283, 5.133238785), (-1.309172026, 1.829909453))
            ThreePointArc((-1.309172026, 1.829909453), (-1.94216249, 1.136003901), (-2.236715327, 0.244140421))
            ThreePointArc((-2.236715327, 0.244140421), (-2.141502308, -0.690266516), (-1.673115077, -1.504388892))
            Line((-1.673115077, -1.504388892), (-2.03367782, -4.807718225))
            Line((-2.03367782, -4.807718225), (0.952058491, -5.133615271))
            Line((0.952058491, -5.133615271), (1.312958675, -1.827194439))
            ThreePointArc((1.312958675, -1.827194439), (1.943337692, -1.133992334), (2.236715327, -0.244140421))
            ThreePointArc((2.236715327, -0.244140421), (2.142215878, 0.688048787), (1.676226843, 1.500920907))
        make_face()
    extrude(amount=-CUT_EXTRUDE1_DEPTH, mode=Mode.SUBTRACT)


solid = part.part
